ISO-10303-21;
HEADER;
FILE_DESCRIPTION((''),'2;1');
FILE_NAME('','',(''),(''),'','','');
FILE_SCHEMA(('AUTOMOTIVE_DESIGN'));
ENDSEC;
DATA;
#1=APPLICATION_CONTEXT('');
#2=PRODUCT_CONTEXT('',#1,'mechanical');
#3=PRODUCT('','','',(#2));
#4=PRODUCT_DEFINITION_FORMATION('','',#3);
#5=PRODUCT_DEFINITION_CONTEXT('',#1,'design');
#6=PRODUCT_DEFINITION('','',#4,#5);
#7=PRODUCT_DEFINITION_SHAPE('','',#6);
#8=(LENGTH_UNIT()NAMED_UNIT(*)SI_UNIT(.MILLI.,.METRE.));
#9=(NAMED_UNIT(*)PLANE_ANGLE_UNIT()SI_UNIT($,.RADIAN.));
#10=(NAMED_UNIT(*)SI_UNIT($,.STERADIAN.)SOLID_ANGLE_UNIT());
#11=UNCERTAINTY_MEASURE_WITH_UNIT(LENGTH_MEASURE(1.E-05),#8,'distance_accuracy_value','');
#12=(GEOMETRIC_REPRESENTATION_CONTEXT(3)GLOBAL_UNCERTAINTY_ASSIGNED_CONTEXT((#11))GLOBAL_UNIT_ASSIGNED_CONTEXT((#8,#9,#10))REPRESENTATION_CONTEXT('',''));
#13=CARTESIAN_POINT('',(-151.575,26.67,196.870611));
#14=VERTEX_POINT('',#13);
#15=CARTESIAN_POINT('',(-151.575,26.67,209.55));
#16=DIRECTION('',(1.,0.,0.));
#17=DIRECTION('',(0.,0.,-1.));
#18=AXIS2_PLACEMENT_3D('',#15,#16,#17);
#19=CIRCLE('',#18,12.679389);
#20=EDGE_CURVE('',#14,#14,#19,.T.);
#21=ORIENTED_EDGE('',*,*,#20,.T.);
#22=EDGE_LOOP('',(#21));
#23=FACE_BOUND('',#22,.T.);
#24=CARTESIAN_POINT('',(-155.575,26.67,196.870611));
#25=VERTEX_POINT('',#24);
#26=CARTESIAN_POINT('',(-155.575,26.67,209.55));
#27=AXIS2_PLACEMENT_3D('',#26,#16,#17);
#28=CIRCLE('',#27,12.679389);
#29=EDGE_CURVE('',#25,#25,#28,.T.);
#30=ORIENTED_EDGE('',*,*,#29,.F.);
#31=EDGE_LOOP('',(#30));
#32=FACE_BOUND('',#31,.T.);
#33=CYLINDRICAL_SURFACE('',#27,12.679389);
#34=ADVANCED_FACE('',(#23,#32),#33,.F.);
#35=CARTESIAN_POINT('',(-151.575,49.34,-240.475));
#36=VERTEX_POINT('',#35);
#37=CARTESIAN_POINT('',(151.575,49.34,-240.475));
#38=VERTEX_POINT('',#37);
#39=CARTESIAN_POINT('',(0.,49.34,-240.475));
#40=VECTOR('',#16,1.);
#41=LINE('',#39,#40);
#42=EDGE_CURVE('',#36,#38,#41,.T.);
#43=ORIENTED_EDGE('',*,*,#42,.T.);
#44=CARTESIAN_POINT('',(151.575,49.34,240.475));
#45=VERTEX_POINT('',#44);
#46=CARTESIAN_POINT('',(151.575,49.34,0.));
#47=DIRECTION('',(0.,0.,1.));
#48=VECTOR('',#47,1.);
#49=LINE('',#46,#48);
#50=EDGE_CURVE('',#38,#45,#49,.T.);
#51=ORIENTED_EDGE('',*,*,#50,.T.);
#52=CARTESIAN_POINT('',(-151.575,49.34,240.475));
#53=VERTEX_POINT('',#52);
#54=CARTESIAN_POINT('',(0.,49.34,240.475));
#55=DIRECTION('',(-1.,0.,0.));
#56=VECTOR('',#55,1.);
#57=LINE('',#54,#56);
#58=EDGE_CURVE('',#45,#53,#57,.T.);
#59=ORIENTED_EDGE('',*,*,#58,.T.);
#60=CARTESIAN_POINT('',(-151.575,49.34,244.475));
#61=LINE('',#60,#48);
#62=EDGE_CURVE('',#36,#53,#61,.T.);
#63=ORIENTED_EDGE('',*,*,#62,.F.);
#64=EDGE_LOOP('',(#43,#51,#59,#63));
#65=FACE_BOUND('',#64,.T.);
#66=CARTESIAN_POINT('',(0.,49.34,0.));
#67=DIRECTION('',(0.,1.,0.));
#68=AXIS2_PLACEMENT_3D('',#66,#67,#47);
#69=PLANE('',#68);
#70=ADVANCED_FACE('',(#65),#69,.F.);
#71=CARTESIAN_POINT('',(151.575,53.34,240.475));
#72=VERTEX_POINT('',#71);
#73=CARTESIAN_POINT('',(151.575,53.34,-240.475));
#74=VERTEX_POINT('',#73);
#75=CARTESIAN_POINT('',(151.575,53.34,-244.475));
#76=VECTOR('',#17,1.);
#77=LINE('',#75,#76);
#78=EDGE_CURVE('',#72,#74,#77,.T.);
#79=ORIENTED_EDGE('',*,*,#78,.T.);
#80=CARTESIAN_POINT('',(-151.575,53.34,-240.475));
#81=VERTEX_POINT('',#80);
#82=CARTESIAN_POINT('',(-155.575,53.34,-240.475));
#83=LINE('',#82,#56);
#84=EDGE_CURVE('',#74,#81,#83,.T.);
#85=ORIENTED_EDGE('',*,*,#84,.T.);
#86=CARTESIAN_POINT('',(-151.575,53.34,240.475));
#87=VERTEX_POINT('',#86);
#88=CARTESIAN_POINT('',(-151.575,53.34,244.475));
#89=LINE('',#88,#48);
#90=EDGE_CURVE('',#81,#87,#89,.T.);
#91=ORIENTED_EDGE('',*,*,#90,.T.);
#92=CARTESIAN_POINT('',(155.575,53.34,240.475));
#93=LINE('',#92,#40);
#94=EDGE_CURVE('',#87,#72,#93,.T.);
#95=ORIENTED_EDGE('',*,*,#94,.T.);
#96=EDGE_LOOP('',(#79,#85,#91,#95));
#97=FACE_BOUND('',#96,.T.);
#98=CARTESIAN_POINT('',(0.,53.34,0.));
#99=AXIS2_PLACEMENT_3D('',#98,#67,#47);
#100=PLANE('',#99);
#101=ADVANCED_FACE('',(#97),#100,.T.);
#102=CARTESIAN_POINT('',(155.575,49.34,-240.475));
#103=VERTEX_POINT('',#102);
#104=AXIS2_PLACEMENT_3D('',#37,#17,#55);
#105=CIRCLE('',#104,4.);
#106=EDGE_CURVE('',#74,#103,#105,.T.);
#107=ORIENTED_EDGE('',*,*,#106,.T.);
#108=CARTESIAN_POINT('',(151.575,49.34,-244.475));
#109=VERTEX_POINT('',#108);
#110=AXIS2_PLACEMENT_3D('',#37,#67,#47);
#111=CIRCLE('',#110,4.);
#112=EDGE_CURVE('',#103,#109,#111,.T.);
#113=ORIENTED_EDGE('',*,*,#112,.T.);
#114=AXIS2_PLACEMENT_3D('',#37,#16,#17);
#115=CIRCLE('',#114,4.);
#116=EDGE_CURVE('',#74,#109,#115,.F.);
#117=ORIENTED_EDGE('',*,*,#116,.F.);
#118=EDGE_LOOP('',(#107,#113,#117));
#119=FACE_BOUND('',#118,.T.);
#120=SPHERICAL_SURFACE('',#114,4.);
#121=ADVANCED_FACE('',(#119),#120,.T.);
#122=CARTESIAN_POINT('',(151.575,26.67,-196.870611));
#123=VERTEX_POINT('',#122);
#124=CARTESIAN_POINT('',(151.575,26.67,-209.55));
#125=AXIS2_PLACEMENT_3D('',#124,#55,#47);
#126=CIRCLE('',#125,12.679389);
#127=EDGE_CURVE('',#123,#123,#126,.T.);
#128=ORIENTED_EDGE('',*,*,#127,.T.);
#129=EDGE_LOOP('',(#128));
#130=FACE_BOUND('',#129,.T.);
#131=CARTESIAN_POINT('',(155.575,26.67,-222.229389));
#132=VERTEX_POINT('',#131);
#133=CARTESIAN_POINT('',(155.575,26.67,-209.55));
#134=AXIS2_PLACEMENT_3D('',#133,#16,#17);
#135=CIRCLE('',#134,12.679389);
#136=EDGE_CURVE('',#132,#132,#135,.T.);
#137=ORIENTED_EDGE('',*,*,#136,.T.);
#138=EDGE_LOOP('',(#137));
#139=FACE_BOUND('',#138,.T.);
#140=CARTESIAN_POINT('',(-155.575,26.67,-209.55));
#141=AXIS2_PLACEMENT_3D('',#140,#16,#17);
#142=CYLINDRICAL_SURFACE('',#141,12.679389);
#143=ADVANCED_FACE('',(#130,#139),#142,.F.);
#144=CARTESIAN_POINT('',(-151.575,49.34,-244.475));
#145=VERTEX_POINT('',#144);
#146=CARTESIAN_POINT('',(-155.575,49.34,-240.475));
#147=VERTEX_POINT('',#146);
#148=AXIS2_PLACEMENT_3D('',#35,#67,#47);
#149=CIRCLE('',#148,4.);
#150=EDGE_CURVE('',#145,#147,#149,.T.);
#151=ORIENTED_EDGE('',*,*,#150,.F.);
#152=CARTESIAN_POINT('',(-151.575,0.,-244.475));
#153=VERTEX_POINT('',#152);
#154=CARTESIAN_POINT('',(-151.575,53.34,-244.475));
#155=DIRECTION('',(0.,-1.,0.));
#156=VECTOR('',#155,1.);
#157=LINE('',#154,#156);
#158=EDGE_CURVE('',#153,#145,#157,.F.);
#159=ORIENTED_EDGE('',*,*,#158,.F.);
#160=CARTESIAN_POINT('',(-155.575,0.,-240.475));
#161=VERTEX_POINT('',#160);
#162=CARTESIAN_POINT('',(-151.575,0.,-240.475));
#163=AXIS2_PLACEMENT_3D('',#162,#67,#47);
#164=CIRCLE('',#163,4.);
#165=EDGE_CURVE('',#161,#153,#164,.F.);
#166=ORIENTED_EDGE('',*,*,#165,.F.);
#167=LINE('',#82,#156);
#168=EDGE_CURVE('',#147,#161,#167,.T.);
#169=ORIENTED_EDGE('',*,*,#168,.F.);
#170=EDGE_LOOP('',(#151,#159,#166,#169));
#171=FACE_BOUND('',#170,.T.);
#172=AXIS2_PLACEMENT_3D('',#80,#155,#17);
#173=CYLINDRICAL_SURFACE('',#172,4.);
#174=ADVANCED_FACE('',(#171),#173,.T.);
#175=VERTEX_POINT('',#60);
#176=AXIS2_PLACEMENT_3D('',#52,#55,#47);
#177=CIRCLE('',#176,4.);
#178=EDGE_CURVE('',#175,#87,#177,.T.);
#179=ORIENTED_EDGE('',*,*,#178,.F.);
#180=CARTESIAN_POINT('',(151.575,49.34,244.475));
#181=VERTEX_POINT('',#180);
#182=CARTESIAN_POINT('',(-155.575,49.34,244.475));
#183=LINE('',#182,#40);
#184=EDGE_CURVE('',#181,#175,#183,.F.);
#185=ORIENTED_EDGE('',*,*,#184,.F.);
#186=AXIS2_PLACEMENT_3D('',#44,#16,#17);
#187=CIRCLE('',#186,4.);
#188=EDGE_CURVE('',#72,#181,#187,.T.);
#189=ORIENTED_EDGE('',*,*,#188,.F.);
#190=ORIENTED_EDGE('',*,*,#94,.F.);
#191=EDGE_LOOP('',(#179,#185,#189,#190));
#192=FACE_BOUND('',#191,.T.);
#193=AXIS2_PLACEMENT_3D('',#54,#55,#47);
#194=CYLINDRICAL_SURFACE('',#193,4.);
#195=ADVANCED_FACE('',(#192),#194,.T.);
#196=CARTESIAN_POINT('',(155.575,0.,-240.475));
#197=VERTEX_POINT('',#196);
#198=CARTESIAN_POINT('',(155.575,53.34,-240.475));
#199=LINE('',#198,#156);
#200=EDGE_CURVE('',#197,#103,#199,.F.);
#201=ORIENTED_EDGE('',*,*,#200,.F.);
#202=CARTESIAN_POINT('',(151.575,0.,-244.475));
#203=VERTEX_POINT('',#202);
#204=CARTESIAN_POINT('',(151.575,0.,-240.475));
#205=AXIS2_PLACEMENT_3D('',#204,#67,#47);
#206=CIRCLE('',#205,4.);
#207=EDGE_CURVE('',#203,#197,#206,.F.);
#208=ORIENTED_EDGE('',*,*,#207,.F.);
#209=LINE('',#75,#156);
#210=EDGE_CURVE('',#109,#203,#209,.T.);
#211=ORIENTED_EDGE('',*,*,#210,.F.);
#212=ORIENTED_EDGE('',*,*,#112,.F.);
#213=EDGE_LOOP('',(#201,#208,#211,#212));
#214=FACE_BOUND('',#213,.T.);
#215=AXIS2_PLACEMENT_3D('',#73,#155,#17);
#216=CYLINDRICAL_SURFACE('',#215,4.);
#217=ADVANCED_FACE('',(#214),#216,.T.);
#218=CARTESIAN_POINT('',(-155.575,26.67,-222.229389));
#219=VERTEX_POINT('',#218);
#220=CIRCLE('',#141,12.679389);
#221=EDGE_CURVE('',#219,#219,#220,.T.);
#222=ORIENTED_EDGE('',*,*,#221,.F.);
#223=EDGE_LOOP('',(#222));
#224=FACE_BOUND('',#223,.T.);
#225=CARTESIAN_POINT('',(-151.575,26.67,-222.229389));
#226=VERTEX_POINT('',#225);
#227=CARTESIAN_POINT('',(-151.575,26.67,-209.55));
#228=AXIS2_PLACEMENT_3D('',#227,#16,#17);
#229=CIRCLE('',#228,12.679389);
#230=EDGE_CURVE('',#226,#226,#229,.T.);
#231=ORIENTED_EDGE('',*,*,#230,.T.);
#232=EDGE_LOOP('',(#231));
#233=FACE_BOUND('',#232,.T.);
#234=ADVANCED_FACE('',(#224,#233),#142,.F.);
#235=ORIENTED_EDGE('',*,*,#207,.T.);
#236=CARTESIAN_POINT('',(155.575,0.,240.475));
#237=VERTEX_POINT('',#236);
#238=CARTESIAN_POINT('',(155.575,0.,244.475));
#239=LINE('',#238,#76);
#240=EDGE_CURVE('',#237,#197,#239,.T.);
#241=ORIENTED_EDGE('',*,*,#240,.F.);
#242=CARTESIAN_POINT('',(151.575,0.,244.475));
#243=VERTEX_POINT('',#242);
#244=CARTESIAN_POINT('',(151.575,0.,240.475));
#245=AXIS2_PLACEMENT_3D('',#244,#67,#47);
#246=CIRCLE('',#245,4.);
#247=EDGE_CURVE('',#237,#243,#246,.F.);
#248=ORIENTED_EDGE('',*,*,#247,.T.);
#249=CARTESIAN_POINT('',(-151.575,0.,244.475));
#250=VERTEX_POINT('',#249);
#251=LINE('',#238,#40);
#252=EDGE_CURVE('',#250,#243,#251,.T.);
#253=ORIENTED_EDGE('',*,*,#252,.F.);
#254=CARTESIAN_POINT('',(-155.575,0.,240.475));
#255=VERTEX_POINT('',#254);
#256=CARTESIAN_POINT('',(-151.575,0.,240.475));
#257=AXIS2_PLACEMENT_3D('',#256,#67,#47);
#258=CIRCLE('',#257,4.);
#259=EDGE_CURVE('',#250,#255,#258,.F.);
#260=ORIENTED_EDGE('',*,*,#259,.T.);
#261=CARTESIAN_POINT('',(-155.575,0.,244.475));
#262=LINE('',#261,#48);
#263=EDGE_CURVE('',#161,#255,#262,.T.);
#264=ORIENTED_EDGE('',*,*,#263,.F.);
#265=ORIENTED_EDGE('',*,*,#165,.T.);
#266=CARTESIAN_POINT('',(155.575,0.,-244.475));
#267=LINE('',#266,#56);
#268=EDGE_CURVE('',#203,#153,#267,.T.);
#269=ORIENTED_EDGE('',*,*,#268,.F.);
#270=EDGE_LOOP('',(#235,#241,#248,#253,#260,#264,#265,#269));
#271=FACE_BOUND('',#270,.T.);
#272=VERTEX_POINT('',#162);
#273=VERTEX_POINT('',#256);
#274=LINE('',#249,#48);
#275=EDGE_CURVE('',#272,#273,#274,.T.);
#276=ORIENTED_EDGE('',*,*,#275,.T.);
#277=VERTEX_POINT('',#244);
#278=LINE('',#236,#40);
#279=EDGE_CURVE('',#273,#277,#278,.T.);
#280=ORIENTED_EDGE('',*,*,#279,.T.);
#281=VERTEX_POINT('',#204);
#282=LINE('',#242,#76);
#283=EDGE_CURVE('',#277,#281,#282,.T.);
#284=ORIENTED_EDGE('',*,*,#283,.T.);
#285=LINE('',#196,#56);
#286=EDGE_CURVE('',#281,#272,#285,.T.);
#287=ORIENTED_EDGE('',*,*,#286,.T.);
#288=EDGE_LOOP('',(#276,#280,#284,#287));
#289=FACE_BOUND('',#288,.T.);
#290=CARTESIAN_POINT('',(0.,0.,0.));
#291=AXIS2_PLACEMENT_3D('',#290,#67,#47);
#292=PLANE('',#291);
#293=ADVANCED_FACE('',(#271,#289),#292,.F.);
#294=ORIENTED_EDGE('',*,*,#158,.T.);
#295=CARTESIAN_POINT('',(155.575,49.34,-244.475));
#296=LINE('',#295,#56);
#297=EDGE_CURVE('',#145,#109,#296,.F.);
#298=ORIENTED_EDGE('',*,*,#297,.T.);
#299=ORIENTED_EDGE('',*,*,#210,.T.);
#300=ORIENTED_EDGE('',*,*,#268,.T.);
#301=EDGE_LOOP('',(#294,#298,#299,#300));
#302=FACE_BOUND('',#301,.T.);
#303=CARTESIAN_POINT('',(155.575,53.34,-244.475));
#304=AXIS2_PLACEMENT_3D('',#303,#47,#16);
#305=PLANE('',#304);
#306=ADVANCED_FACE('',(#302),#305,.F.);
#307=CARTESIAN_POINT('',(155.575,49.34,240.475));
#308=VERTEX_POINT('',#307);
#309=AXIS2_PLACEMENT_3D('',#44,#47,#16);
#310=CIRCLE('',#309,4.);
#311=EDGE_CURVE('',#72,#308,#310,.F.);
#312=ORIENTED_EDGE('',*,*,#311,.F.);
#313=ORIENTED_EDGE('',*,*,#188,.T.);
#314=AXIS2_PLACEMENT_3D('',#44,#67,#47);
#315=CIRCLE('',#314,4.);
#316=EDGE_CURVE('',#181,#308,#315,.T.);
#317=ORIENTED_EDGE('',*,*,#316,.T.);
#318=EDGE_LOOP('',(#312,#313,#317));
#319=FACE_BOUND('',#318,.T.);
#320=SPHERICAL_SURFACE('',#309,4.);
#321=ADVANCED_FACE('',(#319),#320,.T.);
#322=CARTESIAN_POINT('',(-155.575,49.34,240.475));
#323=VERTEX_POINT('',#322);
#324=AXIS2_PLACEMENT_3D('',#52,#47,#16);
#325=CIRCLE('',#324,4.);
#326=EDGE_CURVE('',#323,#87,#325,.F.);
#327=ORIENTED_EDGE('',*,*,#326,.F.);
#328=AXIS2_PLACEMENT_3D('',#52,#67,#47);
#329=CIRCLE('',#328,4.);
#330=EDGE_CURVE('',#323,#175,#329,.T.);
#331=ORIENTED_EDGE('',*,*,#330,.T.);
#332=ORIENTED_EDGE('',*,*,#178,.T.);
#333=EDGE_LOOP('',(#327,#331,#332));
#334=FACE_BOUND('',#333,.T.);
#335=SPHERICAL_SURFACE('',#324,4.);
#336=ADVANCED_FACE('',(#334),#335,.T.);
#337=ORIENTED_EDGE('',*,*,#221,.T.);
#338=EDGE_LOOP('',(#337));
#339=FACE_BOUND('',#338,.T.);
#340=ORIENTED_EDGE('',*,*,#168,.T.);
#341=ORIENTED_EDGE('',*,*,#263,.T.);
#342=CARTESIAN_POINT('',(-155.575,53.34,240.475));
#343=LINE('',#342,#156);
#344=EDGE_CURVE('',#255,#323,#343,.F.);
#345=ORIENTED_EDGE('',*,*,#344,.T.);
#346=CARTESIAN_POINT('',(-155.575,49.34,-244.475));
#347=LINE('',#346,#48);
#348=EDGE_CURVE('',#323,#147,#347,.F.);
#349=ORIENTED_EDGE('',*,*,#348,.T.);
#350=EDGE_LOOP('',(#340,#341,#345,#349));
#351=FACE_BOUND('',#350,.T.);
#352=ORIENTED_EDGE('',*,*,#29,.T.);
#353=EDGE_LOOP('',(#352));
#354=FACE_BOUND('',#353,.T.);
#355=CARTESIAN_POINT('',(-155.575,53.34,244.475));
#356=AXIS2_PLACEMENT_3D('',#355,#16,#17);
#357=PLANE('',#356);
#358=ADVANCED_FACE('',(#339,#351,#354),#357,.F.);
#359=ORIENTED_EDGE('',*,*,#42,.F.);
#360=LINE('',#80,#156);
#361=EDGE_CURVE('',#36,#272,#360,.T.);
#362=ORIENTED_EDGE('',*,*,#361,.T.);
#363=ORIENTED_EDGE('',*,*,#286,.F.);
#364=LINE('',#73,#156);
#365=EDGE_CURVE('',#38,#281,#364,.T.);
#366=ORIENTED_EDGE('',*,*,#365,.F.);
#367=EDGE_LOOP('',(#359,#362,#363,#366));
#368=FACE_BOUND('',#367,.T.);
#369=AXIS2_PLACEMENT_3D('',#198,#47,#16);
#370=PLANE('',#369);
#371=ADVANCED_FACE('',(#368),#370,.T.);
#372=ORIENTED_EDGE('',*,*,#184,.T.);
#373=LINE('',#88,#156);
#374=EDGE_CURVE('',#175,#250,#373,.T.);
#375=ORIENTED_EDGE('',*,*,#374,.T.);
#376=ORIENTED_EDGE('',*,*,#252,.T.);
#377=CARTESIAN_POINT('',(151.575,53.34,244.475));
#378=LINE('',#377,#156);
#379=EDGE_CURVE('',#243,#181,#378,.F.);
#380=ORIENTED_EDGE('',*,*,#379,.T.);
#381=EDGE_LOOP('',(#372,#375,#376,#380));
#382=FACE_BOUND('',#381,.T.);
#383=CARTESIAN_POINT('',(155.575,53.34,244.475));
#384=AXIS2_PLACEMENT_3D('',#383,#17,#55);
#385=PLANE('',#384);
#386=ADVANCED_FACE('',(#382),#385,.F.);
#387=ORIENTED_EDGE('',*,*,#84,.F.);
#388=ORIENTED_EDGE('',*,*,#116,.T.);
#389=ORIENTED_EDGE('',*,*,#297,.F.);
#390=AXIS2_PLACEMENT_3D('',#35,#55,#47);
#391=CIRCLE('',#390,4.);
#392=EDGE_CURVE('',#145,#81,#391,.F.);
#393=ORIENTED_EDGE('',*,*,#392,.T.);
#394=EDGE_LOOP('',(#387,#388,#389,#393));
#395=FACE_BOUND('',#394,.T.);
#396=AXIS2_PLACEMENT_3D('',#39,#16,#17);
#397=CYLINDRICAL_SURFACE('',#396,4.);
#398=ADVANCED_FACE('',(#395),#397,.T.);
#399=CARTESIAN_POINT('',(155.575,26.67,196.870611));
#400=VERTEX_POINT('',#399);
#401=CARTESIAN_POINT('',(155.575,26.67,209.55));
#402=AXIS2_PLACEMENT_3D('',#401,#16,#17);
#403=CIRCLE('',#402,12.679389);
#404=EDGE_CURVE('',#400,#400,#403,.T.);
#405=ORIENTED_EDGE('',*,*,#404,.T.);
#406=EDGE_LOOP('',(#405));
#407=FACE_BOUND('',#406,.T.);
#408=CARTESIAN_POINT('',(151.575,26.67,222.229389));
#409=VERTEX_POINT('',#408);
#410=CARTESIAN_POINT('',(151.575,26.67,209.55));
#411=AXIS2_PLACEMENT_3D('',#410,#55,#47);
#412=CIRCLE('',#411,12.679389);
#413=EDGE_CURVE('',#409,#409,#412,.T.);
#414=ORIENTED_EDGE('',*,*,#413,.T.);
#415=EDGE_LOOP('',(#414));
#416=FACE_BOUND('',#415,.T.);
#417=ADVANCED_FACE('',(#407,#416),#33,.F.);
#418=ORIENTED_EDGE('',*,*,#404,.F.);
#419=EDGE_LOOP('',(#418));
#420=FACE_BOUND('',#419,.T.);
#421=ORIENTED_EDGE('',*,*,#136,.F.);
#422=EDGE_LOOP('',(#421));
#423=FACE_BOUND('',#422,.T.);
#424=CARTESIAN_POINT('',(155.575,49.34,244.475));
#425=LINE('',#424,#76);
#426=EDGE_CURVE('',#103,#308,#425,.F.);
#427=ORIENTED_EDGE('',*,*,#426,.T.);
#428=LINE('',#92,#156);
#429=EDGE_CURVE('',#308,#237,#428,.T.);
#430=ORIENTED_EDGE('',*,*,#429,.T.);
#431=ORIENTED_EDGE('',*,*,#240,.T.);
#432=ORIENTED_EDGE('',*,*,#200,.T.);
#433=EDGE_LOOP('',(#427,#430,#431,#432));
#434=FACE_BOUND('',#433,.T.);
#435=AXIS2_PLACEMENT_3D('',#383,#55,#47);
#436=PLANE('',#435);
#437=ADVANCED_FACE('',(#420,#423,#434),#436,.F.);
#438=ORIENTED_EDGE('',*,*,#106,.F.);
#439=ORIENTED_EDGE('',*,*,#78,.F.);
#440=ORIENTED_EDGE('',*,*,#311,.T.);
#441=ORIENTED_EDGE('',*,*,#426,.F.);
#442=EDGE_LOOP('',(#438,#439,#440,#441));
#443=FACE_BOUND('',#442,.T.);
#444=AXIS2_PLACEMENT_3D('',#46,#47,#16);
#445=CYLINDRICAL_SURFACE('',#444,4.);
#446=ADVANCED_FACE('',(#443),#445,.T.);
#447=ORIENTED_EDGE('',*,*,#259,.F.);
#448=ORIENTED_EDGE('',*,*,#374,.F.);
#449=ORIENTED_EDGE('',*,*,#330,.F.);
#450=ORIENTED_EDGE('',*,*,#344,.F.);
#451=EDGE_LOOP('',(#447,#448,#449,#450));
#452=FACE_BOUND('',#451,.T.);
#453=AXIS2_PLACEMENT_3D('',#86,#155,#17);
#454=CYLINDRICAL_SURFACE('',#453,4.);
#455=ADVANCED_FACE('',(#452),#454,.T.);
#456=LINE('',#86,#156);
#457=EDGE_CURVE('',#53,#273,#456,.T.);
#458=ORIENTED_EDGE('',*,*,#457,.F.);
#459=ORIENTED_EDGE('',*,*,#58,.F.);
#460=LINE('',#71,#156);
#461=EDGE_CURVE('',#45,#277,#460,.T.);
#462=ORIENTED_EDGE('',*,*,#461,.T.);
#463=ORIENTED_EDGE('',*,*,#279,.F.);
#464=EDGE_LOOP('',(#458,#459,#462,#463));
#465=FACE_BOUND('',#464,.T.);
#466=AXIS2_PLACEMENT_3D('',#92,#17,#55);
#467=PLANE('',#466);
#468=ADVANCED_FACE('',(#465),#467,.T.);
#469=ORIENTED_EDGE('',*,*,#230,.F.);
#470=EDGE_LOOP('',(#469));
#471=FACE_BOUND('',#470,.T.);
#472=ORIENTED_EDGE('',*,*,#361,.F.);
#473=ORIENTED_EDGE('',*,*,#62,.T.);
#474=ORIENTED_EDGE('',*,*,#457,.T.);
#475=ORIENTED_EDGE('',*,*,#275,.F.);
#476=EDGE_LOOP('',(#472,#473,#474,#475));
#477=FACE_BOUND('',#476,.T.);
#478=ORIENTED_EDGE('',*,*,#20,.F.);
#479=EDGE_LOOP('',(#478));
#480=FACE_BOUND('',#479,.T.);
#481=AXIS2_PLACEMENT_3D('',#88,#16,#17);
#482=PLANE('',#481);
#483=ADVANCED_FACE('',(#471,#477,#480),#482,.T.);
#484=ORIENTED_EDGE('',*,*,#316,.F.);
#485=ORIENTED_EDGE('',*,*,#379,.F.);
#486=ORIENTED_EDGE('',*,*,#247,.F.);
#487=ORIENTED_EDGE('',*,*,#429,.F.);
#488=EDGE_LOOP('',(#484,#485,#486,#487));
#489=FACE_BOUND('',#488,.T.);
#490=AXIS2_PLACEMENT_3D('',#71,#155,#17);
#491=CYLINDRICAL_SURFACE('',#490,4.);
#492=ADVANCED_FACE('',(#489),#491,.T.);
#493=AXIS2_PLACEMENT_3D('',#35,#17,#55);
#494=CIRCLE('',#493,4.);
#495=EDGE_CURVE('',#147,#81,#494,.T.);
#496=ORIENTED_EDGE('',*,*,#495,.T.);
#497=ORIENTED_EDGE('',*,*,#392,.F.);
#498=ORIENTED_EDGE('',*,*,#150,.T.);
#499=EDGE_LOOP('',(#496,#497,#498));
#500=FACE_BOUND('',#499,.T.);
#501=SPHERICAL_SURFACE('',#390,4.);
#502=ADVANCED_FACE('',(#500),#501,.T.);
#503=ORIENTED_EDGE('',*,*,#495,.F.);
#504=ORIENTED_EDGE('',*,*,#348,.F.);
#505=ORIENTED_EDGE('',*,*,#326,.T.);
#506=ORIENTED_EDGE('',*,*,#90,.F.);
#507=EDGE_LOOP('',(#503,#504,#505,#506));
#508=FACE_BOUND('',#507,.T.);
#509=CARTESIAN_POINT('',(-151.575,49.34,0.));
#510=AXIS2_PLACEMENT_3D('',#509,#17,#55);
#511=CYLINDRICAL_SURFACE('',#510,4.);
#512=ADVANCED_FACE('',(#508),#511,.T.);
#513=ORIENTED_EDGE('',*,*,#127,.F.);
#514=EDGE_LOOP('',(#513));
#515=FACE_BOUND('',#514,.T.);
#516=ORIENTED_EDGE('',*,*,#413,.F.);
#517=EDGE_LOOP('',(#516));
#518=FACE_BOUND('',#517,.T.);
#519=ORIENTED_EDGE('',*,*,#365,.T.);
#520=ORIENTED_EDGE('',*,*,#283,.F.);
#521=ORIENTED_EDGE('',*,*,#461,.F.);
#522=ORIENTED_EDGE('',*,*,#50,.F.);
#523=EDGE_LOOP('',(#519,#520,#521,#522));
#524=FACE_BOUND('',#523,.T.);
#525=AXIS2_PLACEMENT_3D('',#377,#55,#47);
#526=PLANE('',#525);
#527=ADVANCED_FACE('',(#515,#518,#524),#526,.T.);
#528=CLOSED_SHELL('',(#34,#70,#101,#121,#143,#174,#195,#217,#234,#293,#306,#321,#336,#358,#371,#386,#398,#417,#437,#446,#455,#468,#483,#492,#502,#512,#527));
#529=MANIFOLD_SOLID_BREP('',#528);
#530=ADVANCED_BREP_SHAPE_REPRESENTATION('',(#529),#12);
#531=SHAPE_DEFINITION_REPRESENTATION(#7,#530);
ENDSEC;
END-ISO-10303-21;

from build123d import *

# Parameters (mm, degrees)
SKETCH1_W           = 311.15
SKETCH1_H           = 488.95
BOSS_EXTRUDE1_DEPTH = 53.34
FILLET1_R           = 4
SHELL1_START        = -151.575
SHELL1_OUTLINE_W    = 49.34
SHELL1_OUTLINE_H    = 480.95
SHELL1_DEPTH        = 303.15
SKETCH2_R           = 12.67938946
CUT_EXTRUDE1_DEPTH  = 400.283738368


# Read off the part's stored shape, not the designer's step: Shell1
with BuildPart() as part:
    # Sketch1 → Boss-Extrude1 (new body)
    with BuildSketch(Plane(origin=(0, 0, 0), x_dir=(1, 0, 0), z_dir=(0, 1, 0))):
        Rectangle(SKETCH1_W, SKETCH1_H)
    extrude(amount=BOSS_EXTRUDE1_DEPTH)

    # Fillet1
    fillet1_edges = [part.edges().sort_by_distance(p)[0] for p in [
        (155.575, 53.34, 0),
        (0, 53.34, -244.475),
        (-155.575, 53.34, 0),
        (-155.575, 26.67, -244.475),
        (155.575, 26.67, -244.475),
        (155.575, 26.67, 244.475),
        (-155.575, 26.67, 244.475),
        (0, 53.34, 244.475),
    ]]
    fillet(fillet1_edges, radius=FILLET1_R)

    # Shell1 outline → Shell1 (cut)
    with BuildSketch(Plane.YZ.offset(SHELL1_START)):
        with Locations((24.67, 0)):
            Rectangle(SHELL1_OUTLINE_W, SHELL1_OUTLINE_H)
    extrude(amount=SHELL1_DEPTH, mode=Mode.SUBTRACT)

    # Sketch2 → Cut-Extrude1 (cut, through all)
    with BuildSketch(Plane(origin=(155.575, 0, 0), x_dir=(0, 0, -1), z_dir=(1, 0, 0))):
        with Locations((-209.55, 26.67)):
            Circle(SKETCH2_R)
        with Locations((209.55, 26.67)):
            Circle(SKETCH2_R)
    extrude(amount=-CUT_EXTRUDE1_DEPTH, mode=Mode.SUBTRACT)


solid = part.part
